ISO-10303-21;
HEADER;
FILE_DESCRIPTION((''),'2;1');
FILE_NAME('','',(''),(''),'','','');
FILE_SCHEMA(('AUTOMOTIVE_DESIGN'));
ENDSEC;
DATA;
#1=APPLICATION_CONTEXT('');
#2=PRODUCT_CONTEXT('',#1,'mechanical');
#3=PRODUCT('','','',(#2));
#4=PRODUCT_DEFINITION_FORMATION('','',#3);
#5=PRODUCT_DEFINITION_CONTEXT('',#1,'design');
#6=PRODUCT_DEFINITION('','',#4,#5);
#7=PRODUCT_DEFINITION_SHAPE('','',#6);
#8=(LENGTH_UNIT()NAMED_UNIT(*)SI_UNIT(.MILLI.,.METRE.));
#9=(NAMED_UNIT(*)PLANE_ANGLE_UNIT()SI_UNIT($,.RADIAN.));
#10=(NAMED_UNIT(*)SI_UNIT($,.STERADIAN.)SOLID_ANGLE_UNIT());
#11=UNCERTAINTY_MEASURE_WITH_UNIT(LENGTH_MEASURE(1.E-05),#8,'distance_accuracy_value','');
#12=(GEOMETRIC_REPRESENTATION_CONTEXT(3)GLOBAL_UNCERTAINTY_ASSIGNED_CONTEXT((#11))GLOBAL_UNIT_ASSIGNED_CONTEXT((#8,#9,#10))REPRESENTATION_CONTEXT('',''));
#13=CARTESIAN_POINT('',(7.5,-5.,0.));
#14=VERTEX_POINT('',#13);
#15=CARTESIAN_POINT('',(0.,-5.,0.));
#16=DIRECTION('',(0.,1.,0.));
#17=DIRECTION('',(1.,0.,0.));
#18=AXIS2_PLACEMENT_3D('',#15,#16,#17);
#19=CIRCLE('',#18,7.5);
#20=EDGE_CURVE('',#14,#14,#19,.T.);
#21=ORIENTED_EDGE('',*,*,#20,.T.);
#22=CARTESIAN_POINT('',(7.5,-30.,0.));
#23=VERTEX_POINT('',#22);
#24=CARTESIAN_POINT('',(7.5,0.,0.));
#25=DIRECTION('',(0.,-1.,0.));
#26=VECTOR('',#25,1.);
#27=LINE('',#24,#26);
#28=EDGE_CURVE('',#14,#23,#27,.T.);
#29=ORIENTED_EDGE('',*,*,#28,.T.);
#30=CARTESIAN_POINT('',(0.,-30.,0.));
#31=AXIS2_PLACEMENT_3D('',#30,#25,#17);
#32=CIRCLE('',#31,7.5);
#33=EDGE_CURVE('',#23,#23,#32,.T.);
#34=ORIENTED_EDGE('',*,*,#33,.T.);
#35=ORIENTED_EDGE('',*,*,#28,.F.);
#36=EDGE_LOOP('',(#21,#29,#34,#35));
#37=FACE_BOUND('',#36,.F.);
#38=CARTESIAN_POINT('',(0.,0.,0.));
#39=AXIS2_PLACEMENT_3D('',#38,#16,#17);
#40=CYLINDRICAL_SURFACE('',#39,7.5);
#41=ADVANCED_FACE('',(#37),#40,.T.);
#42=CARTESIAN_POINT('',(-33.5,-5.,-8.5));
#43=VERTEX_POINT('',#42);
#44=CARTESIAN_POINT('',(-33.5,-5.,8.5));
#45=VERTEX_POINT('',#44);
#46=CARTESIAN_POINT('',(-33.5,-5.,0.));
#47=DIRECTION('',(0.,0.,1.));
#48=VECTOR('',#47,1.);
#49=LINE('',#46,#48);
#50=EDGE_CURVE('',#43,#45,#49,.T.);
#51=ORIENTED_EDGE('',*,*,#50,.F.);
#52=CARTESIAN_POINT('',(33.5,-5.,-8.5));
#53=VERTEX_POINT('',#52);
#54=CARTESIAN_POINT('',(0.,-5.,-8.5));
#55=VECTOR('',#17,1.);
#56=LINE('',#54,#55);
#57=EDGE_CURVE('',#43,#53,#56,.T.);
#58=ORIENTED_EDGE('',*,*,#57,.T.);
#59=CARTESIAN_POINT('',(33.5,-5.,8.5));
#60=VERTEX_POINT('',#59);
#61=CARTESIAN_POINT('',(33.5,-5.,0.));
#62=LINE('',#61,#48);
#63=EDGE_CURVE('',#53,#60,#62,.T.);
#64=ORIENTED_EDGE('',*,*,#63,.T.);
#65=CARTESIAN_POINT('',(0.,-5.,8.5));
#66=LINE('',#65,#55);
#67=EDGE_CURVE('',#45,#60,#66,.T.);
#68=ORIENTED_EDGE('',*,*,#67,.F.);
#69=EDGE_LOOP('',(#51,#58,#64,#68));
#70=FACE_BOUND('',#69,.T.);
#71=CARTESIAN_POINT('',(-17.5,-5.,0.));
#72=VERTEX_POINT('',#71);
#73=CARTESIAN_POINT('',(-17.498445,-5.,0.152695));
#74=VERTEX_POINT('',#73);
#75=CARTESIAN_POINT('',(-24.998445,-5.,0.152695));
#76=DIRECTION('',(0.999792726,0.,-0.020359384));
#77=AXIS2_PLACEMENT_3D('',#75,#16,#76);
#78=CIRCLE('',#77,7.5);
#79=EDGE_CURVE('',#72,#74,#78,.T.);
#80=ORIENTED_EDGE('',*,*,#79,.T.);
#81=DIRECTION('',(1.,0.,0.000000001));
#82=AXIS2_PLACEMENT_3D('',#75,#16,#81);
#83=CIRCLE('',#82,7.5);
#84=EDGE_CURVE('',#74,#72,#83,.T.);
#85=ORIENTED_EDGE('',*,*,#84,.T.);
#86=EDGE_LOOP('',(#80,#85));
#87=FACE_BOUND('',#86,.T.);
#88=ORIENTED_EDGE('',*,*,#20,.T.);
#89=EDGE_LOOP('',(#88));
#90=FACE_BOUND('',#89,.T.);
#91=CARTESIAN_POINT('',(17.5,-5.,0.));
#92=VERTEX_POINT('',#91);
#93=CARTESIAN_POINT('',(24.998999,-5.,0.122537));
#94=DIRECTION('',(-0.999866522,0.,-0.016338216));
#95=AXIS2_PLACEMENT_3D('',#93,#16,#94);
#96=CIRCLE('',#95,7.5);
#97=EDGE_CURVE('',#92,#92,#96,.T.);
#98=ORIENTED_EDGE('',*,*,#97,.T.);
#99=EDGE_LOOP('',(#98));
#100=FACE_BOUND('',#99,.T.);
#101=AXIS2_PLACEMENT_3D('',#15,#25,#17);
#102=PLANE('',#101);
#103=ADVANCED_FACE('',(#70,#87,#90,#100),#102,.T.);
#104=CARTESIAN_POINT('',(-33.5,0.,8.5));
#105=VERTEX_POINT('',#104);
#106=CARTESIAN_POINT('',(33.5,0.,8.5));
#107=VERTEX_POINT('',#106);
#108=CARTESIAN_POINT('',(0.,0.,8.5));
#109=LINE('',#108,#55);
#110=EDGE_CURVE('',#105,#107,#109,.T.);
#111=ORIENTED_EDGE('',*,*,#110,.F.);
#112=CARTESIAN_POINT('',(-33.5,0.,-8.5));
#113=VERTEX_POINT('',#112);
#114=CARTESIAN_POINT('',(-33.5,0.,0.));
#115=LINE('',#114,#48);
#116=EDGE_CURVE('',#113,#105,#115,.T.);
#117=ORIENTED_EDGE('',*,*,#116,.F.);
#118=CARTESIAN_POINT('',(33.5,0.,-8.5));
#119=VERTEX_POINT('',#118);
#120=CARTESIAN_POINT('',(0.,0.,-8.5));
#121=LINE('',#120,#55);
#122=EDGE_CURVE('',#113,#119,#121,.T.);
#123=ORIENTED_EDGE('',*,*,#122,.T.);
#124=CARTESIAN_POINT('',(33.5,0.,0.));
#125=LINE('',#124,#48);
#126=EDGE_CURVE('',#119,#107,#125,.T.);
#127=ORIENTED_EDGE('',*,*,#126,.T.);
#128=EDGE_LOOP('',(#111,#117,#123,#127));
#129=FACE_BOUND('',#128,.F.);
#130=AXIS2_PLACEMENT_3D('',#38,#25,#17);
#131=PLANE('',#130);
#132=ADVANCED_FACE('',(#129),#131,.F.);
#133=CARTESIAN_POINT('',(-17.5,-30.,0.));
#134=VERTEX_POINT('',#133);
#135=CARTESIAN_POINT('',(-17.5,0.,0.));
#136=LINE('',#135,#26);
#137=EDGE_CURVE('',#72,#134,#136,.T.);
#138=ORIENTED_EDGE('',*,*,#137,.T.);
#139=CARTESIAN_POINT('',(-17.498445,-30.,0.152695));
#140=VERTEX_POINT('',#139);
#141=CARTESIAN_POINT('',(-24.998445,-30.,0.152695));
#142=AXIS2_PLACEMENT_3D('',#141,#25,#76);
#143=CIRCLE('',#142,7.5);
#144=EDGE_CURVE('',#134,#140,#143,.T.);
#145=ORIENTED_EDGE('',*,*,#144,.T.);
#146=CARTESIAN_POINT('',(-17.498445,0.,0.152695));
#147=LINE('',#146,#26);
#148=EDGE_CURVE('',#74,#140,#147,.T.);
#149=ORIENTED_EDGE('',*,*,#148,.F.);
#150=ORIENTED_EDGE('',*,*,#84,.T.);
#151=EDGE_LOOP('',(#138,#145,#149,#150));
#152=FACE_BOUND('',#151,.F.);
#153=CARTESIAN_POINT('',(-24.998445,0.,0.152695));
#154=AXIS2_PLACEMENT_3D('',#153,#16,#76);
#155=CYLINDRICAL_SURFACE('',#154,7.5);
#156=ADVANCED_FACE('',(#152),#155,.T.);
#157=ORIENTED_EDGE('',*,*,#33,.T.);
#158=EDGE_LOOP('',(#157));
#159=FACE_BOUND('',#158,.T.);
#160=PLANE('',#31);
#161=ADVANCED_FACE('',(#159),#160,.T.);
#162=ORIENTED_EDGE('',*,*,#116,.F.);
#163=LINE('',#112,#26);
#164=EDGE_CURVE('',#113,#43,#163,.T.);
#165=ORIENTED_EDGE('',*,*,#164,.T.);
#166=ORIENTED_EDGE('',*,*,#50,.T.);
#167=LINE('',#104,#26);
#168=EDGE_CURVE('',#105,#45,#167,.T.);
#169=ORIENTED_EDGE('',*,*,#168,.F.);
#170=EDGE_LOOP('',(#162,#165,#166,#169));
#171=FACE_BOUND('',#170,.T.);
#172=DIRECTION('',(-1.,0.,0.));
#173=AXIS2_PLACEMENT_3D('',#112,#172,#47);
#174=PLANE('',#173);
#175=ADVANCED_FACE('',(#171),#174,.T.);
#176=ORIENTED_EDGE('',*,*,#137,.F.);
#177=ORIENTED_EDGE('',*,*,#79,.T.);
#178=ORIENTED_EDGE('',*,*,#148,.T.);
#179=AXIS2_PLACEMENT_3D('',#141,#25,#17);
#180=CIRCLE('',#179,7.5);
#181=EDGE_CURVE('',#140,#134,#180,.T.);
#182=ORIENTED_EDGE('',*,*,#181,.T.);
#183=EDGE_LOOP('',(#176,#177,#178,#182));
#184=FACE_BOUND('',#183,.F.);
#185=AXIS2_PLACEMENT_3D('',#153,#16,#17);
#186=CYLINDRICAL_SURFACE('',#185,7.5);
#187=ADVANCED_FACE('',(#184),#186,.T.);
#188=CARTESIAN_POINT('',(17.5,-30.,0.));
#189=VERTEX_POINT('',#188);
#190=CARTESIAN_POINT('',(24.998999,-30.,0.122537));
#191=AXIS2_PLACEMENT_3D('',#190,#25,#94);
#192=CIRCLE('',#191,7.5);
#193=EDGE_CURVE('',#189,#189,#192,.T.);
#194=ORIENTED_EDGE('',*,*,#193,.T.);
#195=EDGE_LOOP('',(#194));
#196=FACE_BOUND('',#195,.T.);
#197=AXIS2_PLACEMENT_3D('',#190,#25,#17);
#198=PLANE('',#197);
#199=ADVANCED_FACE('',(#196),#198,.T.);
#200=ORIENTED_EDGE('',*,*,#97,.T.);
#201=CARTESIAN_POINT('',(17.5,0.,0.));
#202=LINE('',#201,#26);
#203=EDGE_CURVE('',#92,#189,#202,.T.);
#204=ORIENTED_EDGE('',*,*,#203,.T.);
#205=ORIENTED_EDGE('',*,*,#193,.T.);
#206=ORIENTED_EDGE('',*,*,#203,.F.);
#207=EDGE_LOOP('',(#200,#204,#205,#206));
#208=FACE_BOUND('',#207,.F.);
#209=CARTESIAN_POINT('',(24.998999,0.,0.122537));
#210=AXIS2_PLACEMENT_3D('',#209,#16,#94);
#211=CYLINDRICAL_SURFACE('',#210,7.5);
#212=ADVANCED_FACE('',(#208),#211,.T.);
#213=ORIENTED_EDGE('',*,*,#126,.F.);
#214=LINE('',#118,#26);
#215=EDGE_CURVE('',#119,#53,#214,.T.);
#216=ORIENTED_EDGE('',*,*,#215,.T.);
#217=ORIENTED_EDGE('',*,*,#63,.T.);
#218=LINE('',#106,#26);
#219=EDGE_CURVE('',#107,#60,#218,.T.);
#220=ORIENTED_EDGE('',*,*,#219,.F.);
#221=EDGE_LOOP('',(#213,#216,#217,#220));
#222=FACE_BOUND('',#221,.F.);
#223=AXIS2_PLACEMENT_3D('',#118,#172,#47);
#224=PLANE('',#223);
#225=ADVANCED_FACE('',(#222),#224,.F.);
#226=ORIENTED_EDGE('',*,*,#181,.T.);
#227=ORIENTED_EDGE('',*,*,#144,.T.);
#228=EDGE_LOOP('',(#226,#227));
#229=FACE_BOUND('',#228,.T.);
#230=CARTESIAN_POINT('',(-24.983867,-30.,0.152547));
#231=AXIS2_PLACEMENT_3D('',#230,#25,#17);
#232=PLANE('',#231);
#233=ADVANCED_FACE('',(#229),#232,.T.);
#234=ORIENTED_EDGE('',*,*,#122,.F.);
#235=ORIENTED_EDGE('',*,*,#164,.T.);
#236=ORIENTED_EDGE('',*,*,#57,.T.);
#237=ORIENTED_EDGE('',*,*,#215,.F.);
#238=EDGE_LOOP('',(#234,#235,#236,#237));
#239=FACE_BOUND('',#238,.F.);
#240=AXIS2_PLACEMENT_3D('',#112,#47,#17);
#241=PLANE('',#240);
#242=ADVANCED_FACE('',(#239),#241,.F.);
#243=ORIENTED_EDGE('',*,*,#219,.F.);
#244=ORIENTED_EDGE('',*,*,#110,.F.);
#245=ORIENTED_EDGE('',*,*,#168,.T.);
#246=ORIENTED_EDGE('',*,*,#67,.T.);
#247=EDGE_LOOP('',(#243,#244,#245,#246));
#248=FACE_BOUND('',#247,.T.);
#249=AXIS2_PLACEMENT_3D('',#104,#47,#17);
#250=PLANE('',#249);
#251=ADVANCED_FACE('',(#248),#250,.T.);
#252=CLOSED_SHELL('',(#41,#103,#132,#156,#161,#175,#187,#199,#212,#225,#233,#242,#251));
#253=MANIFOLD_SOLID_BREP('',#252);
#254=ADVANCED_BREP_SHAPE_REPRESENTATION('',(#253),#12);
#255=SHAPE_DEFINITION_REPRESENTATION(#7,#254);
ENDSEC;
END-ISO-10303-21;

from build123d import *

# Parameters (mm, degrees)
F0_W     = 67
F0_H     = 17
F1_DEPTH = 5
F2_DEPTH = 30
F3_DEPTH = 30


with BuildPart() as f1:
    # F0 (on Front) → F1 (new body)
    with BuildSketch(Plane.XZ):
        Rectangle(F0_W, F0_H)
        with BuildLine():
            ThreePointArc((-17.498445447, 0.1526953798), (-17.4988340953, 0.0763437334), (-17.5, 0))
            ThreePointArc((-17.5, 0), (-32.4980567986, 0.2290470263), (-17.498445447, 0.1526953798))
        make_face(mode=Mode.SUBTRACT)
        with BuildLine():
            ThreePointArc((-7.5, 0), (0, 7.5), (7.5, 0))
            ThreePointArc((7.5, 0), (0, -7.5), (-7.5, 0))
        make_face(mode=Mode.SUBTRACT)
        with BuildLine():
            ThreePointArc((32.4989989183, 0.1225366207), (25.0602692732, -7.3772131047), (17.5, 0))
            ThreePointArc((17.5, 0), (24.9377285633, 7.6222863461), (32.4989989183, 0.1225366207))
        make_face(mode=Mode.SUBTRACT)
    extrude(amount=F1_DEPTH)

    # F0 (on Front) → F2 (join)
    with BuildSketch(Plane.XZ):
        with BuildLine():
            ThreePointArc((-17.498445447, 0.1526953798), (-32.4980567986, 0.2290470263), (-17.5, 0))
            ThreePointArc((-17.5, 0), (-17.4988340953, 0.0763437334), (-17.498445447, 0.1526953798))
        make_face()
    extrude(amount=F2_DEPTH)

    # F0 (on Front) → F3 (join)
    with BuildSketch(Plane.XZ):
        with BuildLine():
            ThreePointArc((-7.5, 0), (0, -7.5), (7.5, 0))
            ThreePointArc((7.5, 0), (0, 7.5), (-7.5, 0))
        make_face()
        with BuildLine():
            ThreePointArc((32.4989989183, 0.1225366207), (24.9377285633, 7.6222863461), (17.5, 0))
            ThreePointArc((17.5, 0), (25.0602692732, -7.3772131047), (32.4989989183, 0.1225366207))
        make_face()
    extrude(amount=F3_DEPTH)


solid = f1.part
